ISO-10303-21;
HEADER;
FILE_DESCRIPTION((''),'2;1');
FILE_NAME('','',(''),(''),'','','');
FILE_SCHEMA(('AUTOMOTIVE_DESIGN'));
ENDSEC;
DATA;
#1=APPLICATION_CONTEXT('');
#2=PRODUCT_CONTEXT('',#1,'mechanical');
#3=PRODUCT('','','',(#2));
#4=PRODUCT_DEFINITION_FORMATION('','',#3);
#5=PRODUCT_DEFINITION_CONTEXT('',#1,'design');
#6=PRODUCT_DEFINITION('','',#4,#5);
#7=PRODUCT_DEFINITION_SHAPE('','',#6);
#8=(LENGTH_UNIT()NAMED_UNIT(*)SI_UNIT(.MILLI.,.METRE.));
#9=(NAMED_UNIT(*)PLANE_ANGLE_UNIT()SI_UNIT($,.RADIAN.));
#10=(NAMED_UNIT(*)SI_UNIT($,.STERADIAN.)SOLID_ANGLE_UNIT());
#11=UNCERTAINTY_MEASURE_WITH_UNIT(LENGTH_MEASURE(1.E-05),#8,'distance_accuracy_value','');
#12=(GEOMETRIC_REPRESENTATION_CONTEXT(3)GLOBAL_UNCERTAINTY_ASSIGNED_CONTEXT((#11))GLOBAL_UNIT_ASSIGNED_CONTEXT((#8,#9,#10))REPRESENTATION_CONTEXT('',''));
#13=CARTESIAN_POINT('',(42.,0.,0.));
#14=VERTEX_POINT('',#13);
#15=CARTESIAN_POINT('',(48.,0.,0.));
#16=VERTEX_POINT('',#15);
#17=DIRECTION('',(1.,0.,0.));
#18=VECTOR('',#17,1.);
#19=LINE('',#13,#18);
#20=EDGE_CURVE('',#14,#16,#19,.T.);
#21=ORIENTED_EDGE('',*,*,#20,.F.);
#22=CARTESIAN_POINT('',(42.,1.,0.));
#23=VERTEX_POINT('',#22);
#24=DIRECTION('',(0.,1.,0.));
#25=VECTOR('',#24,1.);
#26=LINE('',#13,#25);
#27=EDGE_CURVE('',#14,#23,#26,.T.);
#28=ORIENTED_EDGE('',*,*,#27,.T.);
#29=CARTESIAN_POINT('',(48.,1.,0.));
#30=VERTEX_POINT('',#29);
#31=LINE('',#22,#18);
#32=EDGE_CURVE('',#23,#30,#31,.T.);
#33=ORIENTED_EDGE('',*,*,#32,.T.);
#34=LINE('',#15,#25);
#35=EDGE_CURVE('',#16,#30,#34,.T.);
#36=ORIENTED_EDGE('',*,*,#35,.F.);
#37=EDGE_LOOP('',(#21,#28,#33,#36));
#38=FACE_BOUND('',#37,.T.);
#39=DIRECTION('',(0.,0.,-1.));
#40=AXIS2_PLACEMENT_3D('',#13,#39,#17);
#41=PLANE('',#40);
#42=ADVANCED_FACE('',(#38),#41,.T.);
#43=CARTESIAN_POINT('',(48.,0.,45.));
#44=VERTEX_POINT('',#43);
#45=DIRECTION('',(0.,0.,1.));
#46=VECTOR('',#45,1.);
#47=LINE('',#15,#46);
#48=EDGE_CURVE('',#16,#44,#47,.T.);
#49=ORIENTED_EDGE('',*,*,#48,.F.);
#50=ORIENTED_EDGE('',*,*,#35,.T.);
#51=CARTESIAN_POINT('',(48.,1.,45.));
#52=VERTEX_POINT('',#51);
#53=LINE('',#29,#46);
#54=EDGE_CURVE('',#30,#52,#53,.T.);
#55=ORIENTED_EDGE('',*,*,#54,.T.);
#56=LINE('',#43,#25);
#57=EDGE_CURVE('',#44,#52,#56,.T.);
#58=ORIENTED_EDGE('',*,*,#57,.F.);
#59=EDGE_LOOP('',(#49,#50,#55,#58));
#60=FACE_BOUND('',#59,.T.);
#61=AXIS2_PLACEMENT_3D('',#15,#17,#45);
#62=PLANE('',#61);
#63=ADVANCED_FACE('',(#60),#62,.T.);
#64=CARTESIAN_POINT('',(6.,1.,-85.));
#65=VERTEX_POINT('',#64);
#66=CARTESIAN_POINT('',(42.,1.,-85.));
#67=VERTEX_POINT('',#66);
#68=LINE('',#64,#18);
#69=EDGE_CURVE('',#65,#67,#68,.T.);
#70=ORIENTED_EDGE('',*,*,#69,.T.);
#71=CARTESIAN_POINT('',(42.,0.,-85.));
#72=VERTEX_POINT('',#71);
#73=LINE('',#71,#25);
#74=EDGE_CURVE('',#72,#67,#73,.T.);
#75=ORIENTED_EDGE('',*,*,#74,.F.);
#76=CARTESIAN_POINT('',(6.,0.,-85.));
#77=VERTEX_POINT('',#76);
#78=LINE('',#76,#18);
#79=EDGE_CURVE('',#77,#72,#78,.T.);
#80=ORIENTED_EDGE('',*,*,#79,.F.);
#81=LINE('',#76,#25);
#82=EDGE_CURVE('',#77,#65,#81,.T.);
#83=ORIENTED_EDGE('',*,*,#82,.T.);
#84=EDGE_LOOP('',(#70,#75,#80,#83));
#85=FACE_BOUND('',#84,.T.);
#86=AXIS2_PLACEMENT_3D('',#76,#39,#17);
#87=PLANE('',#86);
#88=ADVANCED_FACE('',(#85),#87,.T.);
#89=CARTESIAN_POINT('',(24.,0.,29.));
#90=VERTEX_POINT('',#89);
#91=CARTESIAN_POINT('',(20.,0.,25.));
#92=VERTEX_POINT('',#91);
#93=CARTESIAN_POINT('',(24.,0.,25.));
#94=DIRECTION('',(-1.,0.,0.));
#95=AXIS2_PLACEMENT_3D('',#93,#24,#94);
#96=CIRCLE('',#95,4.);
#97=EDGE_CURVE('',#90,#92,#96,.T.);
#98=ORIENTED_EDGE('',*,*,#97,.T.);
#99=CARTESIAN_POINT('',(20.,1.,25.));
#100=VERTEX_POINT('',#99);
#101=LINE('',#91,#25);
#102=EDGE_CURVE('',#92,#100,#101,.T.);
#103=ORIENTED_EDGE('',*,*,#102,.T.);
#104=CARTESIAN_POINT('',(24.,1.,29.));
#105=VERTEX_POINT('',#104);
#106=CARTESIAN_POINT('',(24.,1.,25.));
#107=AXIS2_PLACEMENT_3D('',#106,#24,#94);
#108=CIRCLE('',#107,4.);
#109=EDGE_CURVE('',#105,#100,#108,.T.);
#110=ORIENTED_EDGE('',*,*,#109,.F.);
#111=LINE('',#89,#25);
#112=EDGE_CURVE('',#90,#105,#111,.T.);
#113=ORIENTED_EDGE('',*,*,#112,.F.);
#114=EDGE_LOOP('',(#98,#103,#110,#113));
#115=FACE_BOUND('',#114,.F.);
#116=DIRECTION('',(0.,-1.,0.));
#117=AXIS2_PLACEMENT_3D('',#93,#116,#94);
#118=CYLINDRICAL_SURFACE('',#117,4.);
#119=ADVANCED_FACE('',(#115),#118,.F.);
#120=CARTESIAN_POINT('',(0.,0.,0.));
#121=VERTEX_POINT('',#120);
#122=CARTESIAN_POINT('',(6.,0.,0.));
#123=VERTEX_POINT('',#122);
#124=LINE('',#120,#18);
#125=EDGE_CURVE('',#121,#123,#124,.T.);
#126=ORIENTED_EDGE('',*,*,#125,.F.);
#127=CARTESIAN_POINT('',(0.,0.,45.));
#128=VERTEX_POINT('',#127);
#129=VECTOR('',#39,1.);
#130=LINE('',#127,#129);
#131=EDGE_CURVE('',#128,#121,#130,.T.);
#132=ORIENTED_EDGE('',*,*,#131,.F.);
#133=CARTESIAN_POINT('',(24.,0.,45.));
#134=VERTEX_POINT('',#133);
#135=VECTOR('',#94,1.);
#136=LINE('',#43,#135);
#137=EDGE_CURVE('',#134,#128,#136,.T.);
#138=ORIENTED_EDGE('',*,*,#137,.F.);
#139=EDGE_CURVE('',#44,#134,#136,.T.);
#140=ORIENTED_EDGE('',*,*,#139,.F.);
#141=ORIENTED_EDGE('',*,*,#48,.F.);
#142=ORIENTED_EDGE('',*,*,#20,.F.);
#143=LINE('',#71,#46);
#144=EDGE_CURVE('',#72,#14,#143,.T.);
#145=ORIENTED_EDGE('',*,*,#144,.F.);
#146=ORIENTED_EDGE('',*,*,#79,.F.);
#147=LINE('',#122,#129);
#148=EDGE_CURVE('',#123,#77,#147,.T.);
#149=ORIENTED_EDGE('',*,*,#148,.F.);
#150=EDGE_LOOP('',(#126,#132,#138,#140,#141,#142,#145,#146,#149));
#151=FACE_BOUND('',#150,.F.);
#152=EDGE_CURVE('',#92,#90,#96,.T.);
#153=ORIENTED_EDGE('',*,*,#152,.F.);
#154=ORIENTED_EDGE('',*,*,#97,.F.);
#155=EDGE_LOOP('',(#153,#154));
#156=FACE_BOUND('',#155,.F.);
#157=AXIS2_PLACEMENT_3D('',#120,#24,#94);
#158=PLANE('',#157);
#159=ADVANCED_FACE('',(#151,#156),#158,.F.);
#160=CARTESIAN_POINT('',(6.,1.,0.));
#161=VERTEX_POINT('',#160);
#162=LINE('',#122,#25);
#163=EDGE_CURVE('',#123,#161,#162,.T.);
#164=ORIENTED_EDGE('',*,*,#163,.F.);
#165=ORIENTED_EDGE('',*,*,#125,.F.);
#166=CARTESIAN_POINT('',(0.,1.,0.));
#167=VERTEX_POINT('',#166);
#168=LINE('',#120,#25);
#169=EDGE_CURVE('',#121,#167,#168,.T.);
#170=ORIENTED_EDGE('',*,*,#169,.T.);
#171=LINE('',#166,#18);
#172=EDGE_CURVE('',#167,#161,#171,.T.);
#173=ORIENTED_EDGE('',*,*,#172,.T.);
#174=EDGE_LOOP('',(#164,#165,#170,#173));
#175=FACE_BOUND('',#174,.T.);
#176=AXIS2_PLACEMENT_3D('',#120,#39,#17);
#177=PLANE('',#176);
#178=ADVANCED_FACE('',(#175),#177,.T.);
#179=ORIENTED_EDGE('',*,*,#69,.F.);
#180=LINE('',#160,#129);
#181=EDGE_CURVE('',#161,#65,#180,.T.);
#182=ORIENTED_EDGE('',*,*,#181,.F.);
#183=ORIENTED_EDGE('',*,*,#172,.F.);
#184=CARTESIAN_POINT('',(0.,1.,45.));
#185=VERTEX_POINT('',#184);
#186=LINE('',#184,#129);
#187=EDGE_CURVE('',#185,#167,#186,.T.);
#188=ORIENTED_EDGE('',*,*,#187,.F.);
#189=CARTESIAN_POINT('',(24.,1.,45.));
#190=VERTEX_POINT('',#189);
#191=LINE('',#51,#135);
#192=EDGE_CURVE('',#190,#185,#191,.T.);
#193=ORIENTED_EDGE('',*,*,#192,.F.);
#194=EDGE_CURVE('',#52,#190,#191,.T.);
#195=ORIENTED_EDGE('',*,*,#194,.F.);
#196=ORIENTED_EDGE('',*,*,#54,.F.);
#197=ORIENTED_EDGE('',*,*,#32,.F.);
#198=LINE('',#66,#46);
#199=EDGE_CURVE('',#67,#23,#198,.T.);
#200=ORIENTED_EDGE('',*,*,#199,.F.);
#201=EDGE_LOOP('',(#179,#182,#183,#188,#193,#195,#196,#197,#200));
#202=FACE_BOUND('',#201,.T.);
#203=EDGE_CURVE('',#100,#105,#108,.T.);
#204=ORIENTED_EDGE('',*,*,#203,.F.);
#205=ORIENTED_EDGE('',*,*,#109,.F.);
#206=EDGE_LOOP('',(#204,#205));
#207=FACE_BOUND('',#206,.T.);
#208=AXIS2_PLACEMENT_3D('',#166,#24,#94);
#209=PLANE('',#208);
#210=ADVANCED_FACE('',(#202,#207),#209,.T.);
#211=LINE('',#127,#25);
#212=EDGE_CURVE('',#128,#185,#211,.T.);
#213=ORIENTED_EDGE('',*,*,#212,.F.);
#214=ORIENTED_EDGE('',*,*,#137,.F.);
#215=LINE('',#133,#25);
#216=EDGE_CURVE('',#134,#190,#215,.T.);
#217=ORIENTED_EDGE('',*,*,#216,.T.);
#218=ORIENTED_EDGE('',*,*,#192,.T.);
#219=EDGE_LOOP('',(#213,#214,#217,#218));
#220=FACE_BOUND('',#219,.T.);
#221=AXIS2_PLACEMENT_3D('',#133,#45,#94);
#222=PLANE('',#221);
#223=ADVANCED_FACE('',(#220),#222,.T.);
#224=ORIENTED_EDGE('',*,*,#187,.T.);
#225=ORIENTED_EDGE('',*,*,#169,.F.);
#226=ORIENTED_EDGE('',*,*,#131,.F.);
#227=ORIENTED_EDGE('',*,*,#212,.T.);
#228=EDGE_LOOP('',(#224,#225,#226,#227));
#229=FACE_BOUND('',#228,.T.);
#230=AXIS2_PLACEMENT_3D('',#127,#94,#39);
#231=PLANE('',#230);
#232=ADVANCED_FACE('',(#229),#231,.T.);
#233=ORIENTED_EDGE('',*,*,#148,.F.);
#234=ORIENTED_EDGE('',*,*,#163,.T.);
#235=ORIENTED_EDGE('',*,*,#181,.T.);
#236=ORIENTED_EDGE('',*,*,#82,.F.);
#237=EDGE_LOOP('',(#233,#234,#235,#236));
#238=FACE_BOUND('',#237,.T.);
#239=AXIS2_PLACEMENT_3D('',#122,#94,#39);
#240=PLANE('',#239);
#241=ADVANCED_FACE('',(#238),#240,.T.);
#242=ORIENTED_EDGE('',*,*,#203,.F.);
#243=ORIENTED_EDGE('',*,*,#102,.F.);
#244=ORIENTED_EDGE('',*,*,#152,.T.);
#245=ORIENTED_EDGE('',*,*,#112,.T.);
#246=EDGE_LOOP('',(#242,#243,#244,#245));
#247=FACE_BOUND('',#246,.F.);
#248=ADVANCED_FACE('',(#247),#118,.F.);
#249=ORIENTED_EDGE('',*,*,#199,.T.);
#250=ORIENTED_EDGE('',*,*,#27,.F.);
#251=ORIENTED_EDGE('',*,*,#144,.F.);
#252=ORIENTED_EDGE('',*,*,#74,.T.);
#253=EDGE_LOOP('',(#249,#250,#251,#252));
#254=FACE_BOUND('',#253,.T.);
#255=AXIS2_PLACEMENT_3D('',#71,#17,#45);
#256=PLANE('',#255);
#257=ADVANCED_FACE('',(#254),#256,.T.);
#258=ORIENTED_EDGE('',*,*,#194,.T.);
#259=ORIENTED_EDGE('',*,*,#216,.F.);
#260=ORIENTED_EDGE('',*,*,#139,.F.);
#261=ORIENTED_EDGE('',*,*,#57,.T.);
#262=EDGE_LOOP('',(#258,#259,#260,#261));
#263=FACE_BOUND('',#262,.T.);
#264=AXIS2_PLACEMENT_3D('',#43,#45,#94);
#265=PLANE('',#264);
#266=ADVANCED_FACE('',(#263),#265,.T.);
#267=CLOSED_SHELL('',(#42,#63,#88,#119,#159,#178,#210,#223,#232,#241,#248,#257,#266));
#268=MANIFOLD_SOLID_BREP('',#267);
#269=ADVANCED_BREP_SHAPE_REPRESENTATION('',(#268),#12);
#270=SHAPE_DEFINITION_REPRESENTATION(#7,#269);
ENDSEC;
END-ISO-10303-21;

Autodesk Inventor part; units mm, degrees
ref_plane "YZ Plane" through (0, 0, 0) normal (1, 0, 0) x (0, 1, 0)
ref_plane "XZ Plane" through (0, 0, 0) normal (0, 1, 0) x (-1, 0, 0)
ref_plane "XY Plane" through (0, 0, 0) normal (0, 0, 1) x (1, 0, 0)
sketch "Sketch1" plane through (0, 0, 0) normal (0, 1, 0) x (-1, 0, 0)
  line L0 (-48, 0) -> (-48, 45)
  line L1 (-48, 45) -> (0, 45)
  line L2 (0, 45) -> (0, 0)
  line L3 (-6, 0) -> (-6, -85)
  line L4 (-6, -85) -> (-42, -85)
  line L5 (-42, -85) -> (-42, 0)
  line L6 (-24, 45) -> (-24, 29)
  circle A0 centre (-24, 25) radius 4
  line L7 (0, 0) -> (-6, 0)
  line L8 (-42, 0) -> (-48, 0)
  dimension "d8" = 8
  dimension "d0" = 48
  dimension "d1" = 45
  dimension "d2" = 36
  dimension "d3" = 85
  dimension "d6" = 16
  dimension "d7" = 6
extrude "Extrusion1" add sketch "Sketch1" along normal blind 1
properties part number "PendulumBackplate"
